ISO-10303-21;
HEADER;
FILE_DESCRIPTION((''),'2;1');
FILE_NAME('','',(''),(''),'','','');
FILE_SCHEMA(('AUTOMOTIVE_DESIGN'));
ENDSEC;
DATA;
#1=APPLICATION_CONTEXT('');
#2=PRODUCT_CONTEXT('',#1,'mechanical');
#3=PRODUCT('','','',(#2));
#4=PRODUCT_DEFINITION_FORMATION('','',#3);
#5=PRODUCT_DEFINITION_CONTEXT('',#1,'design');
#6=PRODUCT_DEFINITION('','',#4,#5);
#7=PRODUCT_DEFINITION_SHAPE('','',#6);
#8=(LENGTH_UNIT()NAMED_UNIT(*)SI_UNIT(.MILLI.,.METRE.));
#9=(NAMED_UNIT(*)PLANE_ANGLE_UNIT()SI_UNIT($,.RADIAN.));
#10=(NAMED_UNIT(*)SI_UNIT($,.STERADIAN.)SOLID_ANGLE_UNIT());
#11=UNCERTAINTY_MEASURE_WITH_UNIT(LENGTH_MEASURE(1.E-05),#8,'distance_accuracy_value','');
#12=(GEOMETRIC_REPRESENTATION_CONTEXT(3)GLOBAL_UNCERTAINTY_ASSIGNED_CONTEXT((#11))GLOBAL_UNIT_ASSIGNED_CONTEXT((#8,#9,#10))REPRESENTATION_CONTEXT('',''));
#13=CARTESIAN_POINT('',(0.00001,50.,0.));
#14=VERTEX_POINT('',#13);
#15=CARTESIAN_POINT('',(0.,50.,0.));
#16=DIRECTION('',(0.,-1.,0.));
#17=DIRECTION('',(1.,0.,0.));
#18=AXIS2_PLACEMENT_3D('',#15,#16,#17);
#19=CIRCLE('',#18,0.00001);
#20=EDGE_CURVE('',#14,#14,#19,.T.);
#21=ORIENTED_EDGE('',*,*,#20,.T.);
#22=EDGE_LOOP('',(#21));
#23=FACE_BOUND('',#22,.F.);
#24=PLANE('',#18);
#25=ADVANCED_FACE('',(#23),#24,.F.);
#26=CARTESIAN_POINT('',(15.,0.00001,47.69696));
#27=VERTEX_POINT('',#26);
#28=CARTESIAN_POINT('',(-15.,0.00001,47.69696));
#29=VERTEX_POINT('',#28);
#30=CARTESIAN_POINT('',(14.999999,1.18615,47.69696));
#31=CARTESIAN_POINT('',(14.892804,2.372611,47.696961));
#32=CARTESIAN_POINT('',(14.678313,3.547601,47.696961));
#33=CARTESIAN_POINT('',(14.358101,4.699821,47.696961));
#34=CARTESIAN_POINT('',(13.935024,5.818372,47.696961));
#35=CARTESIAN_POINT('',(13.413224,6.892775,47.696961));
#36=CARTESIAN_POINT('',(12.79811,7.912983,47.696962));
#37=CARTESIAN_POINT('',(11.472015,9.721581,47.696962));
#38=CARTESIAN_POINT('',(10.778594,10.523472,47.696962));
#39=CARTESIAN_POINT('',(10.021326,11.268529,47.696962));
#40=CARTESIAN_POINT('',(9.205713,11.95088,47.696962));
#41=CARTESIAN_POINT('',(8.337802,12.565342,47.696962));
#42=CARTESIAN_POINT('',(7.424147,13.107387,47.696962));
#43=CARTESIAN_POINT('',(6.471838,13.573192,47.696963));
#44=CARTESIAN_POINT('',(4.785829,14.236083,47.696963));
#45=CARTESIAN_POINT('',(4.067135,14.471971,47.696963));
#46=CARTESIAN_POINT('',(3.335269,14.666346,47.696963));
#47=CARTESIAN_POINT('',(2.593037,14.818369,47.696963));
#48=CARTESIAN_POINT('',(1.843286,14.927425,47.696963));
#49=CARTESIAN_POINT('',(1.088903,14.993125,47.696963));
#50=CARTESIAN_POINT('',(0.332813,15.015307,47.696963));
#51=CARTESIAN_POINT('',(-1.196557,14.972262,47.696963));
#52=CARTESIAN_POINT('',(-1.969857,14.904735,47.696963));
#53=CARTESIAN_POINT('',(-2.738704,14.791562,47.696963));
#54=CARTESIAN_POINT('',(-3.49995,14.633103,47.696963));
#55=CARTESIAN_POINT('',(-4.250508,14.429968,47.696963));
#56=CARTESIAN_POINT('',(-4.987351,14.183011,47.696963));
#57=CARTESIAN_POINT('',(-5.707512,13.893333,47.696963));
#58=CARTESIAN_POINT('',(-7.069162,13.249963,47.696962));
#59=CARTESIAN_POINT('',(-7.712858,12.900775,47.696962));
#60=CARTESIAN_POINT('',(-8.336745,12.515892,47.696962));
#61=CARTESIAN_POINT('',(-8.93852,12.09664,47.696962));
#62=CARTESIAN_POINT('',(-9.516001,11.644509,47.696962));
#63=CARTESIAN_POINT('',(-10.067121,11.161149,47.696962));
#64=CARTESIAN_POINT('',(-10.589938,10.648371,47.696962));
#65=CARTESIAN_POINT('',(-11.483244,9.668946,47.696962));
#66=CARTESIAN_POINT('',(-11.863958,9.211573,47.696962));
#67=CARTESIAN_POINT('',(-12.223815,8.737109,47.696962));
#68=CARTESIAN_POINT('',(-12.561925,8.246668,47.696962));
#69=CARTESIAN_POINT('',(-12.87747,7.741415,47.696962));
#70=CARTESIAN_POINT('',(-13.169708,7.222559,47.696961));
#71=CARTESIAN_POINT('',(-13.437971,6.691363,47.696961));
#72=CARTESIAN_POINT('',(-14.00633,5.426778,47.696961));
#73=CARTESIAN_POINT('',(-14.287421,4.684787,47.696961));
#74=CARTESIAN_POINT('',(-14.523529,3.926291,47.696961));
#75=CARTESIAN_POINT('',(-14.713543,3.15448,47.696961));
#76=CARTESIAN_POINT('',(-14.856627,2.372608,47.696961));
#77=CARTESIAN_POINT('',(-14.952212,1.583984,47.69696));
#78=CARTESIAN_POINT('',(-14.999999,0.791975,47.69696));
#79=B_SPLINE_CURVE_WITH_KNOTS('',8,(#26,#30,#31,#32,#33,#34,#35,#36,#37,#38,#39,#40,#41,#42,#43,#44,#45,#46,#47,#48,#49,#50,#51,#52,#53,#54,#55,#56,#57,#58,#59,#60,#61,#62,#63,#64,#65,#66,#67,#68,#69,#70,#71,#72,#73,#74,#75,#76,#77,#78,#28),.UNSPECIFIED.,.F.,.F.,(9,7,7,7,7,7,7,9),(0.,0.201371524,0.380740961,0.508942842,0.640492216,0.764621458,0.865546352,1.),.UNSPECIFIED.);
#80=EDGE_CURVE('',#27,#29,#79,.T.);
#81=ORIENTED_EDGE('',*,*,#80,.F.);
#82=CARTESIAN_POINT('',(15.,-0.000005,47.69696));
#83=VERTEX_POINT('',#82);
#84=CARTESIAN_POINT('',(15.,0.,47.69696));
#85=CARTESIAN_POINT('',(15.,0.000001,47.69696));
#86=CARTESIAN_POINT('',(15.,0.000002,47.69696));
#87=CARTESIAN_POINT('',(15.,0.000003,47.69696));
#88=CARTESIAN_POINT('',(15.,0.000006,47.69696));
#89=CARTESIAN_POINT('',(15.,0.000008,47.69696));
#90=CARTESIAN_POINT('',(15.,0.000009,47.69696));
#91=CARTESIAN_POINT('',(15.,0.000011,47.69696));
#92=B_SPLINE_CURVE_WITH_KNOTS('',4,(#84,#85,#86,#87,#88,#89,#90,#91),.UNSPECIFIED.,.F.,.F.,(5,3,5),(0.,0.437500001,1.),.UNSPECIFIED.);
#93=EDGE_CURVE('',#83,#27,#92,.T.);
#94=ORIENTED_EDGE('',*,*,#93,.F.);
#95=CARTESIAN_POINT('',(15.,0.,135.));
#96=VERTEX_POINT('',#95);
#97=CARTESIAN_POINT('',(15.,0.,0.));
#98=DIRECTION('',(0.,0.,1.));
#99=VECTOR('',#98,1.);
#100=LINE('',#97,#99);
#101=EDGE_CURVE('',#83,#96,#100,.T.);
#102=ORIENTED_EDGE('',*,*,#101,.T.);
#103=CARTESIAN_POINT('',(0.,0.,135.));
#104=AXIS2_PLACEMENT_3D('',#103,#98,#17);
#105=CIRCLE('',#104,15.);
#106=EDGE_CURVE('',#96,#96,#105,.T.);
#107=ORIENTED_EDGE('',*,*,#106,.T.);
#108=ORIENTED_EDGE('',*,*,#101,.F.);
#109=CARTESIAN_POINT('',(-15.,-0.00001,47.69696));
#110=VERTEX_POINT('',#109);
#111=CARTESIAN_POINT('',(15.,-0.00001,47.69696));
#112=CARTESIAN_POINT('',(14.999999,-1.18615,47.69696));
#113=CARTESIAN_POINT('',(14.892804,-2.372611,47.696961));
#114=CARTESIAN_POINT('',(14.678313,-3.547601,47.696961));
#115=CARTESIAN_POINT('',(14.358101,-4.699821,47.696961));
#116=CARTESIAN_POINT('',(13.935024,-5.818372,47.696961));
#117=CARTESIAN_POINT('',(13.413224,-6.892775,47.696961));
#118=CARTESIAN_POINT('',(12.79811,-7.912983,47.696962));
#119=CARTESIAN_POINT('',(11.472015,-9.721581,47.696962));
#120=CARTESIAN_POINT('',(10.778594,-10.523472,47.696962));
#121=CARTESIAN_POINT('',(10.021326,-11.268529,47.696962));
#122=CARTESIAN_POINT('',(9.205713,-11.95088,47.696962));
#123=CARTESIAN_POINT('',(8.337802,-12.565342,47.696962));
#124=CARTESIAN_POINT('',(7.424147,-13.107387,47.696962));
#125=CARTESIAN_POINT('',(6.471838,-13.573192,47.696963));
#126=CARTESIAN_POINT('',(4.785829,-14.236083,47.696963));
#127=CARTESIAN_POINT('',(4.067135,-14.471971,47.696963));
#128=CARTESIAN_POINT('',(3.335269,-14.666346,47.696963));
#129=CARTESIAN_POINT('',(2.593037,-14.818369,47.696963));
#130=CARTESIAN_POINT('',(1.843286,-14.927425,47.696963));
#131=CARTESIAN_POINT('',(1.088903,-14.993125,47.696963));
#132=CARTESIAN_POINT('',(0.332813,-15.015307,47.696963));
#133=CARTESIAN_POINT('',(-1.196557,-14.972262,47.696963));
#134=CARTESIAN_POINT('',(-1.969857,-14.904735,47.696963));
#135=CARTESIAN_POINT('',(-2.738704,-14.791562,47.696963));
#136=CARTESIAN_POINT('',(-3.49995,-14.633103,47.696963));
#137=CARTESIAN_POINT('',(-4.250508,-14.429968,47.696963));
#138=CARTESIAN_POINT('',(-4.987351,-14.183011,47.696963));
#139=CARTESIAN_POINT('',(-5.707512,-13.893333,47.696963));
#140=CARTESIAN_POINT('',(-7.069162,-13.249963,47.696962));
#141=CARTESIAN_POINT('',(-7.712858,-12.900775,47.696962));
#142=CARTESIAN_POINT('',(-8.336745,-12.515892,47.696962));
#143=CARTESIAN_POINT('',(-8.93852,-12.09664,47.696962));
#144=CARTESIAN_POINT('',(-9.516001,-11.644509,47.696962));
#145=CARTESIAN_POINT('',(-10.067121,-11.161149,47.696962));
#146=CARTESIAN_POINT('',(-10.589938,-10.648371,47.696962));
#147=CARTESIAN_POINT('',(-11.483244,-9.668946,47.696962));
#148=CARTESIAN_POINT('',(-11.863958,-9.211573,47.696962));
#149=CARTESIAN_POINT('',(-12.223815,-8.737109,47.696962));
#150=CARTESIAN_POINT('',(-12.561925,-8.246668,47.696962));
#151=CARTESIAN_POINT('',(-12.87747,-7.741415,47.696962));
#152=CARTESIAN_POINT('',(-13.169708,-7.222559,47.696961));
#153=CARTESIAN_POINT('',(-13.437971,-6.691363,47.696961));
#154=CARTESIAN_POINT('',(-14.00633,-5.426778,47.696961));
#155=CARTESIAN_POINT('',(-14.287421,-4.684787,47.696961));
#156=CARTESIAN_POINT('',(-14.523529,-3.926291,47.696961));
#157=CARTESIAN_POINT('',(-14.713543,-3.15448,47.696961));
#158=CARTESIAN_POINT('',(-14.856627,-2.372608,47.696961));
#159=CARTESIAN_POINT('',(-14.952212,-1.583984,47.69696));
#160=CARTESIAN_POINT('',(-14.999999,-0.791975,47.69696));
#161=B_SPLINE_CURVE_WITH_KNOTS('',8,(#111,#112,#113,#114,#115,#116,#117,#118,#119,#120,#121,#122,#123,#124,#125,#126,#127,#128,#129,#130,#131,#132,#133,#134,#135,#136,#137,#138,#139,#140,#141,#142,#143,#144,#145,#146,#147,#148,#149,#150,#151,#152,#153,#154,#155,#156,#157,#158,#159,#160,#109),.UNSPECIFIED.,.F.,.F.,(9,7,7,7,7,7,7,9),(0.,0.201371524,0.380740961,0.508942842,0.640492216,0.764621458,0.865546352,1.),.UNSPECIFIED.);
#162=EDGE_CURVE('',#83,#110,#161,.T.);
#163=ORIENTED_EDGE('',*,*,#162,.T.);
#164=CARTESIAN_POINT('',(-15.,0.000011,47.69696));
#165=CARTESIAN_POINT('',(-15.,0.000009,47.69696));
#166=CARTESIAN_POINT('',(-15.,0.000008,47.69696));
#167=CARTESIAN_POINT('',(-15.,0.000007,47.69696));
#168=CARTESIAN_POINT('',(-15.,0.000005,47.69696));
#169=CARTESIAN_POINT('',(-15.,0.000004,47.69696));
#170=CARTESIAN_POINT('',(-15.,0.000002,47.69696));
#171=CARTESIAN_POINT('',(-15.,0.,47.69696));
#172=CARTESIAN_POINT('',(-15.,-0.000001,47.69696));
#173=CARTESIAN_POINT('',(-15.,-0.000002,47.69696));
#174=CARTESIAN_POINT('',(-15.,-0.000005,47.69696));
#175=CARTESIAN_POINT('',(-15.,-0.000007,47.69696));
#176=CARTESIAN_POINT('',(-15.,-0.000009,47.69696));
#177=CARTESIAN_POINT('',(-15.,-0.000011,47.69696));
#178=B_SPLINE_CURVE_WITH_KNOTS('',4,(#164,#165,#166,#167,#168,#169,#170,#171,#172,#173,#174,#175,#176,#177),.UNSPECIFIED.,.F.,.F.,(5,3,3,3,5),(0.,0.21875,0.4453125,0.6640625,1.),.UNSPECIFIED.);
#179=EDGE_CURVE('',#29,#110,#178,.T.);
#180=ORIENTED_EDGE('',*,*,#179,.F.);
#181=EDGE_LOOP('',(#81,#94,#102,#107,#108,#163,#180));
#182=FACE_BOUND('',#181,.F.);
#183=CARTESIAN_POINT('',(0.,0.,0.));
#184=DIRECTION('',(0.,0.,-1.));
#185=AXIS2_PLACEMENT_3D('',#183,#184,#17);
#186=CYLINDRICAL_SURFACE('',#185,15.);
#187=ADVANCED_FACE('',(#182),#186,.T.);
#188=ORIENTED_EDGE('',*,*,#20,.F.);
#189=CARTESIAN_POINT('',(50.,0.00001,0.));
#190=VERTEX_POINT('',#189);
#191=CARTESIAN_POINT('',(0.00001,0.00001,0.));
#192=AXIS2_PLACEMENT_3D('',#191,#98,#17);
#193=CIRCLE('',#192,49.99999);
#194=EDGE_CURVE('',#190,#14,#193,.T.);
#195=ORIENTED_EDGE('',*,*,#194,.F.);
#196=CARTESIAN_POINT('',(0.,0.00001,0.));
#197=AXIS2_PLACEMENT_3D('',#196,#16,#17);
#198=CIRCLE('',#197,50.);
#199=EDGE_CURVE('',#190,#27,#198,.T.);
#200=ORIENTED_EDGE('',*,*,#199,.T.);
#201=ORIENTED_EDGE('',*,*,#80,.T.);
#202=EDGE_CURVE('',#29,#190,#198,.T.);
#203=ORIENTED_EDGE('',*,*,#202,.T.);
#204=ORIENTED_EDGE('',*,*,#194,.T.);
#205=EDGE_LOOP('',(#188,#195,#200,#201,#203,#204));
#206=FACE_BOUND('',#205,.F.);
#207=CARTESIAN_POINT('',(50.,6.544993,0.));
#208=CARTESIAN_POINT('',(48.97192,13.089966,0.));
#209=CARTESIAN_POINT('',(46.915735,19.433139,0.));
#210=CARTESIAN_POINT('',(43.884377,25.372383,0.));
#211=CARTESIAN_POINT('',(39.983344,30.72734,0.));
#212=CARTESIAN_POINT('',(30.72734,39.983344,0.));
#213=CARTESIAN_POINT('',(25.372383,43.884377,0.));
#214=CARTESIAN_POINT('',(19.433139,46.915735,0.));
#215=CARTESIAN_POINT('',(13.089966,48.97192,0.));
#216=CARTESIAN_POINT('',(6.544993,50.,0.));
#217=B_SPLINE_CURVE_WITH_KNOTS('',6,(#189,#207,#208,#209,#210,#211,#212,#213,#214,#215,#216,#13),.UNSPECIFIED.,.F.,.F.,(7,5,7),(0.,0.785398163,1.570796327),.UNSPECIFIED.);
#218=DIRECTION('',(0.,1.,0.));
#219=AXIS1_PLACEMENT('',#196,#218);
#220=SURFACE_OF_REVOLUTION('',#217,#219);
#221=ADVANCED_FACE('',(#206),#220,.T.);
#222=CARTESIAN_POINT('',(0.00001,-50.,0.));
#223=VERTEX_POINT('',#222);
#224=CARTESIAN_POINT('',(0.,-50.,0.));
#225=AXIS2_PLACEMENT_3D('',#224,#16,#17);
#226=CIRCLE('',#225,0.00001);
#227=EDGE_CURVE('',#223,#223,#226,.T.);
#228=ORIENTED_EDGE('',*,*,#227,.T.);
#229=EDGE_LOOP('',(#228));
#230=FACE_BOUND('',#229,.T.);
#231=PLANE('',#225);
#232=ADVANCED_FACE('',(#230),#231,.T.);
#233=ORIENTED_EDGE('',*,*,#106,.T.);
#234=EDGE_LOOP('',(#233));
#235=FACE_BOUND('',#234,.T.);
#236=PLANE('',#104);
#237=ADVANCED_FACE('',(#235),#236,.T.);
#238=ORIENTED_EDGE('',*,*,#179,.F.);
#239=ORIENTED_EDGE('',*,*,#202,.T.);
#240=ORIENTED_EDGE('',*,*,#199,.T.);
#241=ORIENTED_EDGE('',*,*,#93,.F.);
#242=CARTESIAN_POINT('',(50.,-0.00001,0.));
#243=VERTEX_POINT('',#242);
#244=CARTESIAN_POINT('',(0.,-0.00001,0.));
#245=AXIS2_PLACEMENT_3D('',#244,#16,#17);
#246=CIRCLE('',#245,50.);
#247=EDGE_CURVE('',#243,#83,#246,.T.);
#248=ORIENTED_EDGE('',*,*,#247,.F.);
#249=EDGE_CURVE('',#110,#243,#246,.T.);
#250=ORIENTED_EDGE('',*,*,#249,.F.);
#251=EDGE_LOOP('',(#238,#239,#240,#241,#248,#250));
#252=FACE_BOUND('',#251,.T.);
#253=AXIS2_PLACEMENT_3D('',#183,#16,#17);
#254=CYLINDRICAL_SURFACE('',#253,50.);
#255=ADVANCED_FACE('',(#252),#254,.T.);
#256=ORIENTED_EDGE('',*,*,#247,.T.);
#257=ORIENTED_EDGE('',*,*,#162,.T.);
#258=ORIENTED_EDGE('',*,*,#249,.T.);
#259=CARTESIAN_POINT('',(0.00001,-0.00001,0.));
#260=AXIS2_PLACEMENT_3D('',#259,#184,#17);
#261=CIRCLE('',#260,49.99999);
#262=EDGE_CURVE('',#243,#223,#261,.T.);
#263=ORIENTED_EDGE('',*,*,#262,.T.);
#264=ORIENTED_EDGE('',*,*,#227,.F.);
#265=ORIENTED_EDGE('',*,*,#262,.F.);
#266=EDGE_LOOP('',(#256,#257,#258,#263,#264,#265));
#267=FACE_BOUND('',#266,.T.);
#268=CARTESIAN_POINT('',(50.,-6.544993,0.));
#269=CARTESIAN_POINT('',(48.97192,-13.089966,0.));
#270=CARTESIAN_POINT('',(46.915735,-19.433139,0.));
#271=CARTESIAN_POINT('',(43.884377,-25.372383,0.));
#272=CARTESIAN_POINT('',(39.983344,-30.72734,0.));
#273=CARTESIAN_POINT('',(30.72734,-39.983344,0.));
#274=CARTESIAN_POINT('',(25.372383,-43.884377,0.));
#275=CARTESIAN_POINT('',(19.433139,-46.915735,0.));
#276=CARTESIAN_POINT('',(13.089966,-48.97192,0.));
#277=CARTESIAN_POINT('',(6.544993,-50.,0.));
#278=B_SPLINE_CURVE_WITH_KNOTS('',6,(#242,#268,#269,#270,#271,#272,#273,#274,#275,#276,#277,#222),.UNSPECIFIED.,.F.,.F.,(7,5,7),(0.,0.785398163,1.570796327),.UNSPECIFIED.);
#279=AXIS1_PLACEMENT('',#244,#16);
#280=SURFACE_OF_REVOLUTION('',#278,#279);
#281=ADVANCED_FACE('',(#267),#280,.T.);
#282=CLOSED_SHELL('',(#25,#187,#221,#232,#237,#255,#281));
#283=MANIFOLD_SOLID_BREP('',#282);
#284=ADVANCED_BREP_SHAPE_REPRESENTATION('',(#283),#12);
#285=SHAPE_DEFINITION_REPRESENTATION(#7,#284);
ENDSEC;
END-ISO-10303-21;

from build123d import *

# Parameters (mm, degrees)
F0_R     = 50
F1_DEPTH = 50
F2_R     = 49.99999
F3_R     = 15
F4_DEPTH = 135


# Not quite as in the source:
# - a fillet or chamfer is up to 0.001 mm smaller than in the source, because OpenCascade refuses the exact size


with BuildPart() as f1:
    # F0 (on Front) → F1 (new body, symmetric)
    with BuildSketch(Plane.XZ):
        Circle(F0_R)
    extrude(amount=F1_DEPTH, both=True)

    # F2 (radius 50 in the source; OpenCascade refuses exactly that, so slightly less here)
    f2_edges = [f1.edges().sort_by_distance(p)[0] for p in [
        (-50, -50, 0),
        (-50, 50, 0),
    ]]
    fillet(f2_edges, radius=F2_R)

    # F3 (on Top) → F4 (join)
    with BuildSketch(Plane.XY):
        Circle(F3_R)
    extrude(amount=F4_DEPTH)


solid = f1.part
